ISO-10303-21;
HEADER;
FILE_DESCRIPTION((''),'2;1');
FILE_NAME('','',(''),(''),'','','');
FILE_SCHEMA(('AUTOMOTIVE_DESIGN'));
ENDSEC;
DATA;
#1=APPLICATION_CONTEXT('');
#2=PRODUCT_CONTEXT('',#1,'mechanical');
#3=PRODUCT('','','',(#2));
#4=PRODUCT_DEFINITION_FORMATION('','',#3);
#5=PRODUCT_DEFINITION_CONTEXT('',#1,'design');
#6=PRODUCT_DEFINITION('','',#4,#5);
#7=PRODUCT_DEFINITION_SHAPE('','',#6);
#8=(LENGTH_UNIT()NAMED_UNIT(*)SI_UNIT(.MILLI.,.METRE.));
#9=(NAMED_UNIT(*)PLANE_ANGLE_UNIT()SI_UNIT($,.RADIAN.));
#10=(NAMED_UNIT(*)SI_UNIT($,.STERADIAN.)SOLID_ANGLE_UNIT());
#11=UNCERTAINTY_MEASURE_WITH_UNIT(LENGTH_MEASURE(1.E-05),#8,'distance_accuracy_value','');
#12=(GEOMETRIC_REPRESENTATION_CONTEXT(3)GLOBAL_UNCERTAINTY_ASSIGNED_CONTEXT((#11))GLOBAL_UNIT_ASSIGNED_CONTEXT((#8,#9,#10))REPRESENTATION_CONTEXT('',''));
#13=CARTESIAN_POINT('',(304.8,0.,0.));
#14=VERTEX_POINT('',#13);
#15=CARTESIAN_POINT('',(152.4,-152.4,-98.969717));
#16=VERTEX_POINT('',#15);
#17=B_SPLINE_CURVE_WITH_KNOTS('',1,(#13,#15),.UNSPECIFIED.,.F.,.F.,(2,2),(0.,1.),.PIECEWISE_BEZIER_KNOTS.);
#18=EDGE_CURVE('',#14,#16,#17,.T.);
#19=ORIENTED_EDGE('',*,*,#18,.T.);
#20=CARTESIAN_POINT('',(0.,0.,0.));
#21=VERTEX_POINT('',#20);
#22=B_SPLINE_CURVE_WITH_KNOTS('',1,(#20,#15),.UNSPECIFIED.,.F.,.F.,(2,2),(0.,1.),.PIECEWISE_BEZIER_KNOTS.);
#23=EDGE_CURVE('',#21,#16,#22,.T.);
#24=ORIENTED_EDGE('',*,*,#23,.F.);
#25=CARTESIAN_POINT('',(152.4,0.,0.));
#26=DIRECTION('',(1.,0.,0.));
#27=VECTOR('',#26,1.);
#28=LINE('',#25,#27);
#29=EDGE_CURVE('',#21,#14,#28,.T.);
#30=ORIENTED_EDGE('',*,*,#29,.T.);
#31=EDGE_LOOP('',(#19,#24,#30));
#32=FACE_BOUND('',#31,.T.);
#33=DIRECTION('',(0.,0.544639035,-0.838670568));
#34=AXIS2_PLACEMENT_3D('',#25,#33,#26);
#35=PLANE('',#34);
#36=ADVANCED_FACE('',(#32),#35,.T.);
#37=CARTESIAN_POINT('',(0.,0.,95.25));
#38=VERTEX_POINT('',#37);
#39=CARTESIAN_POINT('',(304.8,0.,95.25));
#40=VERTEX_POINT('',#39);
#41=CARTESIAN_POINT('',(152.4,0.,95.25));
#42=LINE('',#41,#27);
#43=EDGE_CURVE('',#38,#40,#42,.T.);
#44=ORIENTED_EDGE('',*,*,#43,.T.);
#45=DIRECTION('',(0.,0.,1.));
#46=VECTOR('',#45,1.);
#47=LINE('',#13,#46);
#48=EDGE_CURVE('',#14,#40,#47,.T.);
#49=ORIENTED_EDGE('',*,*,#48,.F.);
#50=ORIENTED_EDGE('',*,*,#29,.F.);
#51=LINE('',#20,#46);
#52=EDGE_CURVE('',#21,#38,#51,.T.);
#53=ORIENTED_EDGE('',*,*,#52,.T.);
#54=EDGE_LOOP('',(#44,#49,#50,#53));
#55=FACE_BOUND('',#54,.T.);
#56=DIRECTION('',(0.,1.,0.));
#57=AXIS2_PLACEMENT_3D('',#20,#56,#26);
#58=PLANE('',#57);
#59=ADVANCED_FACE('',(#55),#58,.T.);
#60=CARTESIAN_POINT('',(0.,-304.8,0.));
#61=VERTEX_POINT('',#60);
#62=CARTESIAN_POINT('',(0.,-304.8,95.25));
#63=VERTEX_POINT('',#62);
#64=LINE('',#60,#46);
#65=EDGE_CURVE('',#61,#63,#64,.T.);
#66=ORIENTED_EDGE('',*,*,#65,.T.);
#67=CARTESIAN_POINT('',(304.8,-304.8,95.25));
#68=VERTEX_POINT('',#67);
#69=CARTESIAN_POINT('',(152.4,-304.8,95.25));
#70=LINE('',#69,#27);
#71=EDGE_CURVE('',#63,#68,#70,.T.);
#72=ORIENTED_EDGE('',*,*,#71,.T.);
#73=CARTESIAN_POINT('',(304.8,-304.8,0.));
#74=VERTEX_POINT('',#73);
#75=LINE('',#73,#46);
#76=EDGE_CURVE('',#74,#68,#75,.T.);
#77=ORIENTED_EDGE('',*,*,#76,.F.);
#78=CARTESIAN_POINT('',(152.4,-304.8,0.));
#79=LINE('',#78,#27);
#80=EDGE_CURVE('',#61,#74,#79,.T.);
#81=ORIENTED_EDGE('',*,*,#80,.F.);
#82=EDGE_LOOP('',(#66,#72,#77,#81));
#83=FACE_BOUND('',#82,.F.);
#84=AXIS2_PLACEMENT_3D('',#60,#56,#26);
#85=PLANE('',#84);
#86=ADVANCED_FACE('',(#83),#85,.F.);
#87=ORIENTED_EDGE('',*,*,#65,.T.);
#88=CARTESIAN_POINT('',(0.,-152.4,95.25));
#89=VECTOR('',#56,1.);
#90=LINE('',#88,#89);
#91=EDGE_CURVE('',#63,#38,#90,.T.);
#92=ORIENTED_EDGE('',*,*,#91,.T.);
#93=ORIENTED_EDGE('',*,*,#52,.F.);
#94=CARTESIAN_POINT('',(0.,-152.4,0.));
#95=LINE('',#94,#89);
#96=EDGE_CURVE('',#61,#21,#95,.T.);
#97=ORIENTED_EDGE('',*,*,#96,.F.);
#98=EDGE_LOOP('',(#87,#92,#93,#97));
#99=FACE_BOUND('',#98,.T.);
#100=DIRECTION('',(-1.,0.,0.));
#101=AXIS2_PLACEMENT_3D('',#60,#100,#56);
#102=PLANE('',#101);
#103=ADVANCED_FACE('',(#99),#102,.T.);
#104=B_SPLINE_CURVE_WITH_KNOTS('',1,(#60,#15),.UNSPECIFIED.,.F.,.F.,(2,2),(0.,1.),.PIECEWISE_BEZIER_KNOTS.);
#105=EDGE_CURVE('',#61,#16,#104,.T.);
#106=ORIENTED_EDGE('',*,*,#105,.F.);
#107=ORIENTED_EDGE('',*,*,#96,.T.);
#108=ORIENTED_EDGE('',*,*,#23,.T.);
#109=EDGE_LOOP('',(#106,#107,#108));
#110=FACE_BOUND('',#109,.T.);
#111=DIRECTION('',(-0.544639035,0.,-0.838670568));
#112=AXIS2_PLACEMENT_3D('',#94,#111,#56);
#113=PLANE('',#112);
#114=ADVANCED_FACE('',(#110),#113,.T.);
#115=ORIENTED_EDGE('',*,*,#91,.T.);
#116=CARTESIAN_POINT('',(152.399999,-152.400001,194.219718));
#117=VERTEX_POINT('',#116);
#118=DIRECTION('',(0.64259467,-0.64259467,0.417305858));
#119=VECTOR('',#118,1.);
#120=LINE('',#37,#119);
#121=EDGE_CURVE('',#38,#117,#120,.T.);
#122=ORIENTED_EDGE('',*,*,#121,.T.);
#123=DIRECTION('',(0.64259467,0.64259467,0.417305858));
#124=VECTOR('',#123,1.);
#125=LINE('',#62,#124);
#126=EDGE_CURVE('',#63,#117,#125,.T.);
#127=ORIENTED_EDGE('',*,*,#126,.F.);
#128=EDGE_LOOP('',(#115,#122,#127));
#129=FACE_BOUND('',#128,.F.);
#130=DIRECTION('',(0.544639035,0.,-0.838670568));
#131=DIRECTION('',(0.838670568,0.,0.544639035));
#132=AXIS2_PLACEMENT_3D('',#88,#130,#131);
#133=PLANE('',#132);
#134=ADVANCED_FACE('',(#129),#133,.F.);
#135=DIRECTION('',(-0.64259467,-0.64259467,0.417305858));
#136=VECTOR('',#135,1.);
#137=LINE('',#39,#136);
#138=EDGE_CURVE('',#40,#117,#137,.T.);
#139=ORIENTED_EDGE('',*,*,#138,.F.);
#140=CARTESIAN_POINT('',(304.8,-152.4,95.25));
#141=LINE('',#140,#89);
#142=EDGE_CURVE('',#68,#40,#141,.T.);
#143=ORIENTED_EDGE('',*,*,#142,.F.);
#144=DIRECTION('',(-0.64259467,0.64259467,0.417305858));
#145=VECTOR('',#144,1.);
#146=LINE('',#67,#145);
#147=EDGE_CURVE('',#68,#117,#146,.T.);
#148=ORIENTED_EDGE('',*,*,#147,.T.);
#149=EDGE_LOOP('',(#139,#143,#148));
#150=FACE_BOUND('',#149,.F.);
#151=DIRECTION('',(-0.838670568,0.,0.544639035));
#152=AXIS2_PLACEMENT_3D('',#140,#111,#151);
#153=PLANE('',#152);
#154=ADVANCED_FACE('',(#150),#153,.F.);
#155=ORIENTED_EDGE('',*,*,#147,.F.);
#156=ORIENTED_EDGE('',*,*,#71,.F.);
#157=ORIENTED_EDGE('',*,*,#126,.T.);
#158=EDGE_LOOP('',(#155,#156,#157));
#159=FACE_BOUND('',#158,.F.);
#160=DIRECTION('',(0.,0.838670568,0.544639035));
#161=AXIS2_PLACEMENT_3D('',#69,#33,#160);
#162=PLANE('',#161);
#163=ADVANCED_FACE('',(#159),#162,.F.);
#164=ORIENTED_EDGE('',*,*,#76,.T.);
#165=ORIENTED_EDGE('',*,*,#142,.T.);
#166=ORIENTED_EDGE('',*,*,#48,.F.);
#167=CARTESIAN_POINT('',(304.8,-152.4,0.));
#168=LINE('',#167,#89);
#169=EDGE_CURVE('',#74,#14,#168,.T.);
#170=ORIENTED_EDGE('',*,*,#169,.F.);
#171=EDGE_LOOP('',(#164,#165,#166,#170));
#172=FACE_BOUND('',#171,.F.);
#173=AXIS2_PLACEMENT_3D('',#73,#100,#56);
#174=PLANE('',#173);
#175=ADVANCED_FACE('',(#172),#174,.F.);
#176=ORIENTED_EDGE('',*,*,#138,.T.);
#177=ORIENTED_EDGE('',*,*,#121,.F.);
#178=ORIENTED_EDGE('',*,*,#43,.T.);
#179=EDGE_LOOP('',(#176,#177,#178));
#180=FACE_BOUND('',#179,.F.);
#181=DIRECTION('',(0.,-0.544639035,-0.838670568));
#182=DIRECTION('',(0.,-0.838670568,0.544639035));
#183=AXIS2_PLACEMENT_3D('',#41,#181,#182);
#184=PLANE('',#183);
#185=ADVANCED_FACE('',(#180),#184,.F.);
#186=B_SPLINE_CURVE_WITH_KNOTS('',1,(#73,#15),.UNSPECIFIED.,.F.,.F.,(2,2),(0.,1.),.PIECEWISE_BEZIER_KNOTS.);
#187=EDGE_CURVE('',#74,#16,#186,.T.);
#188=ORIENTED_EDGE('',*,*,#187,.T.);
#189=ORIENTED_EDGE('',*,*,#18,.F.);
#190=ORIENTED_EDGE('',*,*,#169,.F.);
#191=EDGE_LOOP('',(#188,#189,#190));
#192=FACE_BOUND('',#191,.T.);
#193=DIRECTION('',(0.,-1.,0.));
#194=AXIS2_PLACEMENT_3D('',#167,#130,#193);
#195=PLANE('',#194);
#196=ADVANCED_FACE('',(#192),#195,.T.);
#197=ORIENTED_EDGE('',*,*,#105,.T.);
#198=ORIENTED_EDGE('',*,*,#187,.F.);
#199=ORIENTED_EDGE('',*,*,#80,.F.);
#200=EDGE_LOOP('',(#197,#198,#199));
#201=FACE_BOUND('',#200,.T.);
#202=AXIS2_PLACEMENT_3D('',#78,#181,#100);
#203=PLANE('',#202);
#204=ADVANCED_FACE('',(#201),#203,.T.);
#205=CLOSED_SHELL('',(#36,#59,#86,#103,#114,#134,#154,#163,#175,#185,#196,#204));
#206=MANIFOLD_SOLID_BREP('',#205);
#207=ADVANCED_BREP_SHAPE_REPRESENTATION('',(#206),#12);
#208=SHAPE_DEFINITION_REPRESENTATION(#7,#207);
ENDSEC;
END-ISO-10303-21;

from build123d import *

# Parameters (mm, degrees)
F0_W       = 304.8
F0_H       = 304.8
F1_DEPTH   = 95.25
F1_FACE_W  = 304.8
F1_FACE_H  = 304.8
F2_DEPTH   = 101.6
F2_TAPER   = 57
F1_FACE1_W = 304.8
F1_FACE1_H = 304.8


# Not quite as in the source:
# - an extrude whose draft closes it to a point is written as a loft to that point


with BuildPart() as f1:
    # F0 (on Top) → F1 (new body)
    with BuildSketch(Plane.XY):
        with Locations((152.4, -152.4)):
            Rectangle(F0_W, F0_H)
    extrude(amount=F1_DEPTH)

    # F1_face (on face) → F2 (join)
    with BuildSketch(Plane(origin=(152.4, -152.4, 95.25), x_dir=(1, 0, 0), z_dir=(0, 0, 1))):
        Rectangle(F1_FACE_W, F1_FACE_H)
    extrude(amount=F2_DEPTH, taper=F2_TAPER)

    # F1_face1 (on face) → F3 section 0
    with BuildSketch(Plane(origin=(152.4, -152.4, 0), x_dir=(1, 0, 0), z_dir=(0, 0, -1)), mode=Mode.PRIVATE) as f3_s0:
        Rectangle(F1_FACE1_W, F1_FACE1_H)
    loft([f3_s0.sketch, Vertex(152.4, -152.4, -98.9697172033)], ruled=True)


solid = f1.part
